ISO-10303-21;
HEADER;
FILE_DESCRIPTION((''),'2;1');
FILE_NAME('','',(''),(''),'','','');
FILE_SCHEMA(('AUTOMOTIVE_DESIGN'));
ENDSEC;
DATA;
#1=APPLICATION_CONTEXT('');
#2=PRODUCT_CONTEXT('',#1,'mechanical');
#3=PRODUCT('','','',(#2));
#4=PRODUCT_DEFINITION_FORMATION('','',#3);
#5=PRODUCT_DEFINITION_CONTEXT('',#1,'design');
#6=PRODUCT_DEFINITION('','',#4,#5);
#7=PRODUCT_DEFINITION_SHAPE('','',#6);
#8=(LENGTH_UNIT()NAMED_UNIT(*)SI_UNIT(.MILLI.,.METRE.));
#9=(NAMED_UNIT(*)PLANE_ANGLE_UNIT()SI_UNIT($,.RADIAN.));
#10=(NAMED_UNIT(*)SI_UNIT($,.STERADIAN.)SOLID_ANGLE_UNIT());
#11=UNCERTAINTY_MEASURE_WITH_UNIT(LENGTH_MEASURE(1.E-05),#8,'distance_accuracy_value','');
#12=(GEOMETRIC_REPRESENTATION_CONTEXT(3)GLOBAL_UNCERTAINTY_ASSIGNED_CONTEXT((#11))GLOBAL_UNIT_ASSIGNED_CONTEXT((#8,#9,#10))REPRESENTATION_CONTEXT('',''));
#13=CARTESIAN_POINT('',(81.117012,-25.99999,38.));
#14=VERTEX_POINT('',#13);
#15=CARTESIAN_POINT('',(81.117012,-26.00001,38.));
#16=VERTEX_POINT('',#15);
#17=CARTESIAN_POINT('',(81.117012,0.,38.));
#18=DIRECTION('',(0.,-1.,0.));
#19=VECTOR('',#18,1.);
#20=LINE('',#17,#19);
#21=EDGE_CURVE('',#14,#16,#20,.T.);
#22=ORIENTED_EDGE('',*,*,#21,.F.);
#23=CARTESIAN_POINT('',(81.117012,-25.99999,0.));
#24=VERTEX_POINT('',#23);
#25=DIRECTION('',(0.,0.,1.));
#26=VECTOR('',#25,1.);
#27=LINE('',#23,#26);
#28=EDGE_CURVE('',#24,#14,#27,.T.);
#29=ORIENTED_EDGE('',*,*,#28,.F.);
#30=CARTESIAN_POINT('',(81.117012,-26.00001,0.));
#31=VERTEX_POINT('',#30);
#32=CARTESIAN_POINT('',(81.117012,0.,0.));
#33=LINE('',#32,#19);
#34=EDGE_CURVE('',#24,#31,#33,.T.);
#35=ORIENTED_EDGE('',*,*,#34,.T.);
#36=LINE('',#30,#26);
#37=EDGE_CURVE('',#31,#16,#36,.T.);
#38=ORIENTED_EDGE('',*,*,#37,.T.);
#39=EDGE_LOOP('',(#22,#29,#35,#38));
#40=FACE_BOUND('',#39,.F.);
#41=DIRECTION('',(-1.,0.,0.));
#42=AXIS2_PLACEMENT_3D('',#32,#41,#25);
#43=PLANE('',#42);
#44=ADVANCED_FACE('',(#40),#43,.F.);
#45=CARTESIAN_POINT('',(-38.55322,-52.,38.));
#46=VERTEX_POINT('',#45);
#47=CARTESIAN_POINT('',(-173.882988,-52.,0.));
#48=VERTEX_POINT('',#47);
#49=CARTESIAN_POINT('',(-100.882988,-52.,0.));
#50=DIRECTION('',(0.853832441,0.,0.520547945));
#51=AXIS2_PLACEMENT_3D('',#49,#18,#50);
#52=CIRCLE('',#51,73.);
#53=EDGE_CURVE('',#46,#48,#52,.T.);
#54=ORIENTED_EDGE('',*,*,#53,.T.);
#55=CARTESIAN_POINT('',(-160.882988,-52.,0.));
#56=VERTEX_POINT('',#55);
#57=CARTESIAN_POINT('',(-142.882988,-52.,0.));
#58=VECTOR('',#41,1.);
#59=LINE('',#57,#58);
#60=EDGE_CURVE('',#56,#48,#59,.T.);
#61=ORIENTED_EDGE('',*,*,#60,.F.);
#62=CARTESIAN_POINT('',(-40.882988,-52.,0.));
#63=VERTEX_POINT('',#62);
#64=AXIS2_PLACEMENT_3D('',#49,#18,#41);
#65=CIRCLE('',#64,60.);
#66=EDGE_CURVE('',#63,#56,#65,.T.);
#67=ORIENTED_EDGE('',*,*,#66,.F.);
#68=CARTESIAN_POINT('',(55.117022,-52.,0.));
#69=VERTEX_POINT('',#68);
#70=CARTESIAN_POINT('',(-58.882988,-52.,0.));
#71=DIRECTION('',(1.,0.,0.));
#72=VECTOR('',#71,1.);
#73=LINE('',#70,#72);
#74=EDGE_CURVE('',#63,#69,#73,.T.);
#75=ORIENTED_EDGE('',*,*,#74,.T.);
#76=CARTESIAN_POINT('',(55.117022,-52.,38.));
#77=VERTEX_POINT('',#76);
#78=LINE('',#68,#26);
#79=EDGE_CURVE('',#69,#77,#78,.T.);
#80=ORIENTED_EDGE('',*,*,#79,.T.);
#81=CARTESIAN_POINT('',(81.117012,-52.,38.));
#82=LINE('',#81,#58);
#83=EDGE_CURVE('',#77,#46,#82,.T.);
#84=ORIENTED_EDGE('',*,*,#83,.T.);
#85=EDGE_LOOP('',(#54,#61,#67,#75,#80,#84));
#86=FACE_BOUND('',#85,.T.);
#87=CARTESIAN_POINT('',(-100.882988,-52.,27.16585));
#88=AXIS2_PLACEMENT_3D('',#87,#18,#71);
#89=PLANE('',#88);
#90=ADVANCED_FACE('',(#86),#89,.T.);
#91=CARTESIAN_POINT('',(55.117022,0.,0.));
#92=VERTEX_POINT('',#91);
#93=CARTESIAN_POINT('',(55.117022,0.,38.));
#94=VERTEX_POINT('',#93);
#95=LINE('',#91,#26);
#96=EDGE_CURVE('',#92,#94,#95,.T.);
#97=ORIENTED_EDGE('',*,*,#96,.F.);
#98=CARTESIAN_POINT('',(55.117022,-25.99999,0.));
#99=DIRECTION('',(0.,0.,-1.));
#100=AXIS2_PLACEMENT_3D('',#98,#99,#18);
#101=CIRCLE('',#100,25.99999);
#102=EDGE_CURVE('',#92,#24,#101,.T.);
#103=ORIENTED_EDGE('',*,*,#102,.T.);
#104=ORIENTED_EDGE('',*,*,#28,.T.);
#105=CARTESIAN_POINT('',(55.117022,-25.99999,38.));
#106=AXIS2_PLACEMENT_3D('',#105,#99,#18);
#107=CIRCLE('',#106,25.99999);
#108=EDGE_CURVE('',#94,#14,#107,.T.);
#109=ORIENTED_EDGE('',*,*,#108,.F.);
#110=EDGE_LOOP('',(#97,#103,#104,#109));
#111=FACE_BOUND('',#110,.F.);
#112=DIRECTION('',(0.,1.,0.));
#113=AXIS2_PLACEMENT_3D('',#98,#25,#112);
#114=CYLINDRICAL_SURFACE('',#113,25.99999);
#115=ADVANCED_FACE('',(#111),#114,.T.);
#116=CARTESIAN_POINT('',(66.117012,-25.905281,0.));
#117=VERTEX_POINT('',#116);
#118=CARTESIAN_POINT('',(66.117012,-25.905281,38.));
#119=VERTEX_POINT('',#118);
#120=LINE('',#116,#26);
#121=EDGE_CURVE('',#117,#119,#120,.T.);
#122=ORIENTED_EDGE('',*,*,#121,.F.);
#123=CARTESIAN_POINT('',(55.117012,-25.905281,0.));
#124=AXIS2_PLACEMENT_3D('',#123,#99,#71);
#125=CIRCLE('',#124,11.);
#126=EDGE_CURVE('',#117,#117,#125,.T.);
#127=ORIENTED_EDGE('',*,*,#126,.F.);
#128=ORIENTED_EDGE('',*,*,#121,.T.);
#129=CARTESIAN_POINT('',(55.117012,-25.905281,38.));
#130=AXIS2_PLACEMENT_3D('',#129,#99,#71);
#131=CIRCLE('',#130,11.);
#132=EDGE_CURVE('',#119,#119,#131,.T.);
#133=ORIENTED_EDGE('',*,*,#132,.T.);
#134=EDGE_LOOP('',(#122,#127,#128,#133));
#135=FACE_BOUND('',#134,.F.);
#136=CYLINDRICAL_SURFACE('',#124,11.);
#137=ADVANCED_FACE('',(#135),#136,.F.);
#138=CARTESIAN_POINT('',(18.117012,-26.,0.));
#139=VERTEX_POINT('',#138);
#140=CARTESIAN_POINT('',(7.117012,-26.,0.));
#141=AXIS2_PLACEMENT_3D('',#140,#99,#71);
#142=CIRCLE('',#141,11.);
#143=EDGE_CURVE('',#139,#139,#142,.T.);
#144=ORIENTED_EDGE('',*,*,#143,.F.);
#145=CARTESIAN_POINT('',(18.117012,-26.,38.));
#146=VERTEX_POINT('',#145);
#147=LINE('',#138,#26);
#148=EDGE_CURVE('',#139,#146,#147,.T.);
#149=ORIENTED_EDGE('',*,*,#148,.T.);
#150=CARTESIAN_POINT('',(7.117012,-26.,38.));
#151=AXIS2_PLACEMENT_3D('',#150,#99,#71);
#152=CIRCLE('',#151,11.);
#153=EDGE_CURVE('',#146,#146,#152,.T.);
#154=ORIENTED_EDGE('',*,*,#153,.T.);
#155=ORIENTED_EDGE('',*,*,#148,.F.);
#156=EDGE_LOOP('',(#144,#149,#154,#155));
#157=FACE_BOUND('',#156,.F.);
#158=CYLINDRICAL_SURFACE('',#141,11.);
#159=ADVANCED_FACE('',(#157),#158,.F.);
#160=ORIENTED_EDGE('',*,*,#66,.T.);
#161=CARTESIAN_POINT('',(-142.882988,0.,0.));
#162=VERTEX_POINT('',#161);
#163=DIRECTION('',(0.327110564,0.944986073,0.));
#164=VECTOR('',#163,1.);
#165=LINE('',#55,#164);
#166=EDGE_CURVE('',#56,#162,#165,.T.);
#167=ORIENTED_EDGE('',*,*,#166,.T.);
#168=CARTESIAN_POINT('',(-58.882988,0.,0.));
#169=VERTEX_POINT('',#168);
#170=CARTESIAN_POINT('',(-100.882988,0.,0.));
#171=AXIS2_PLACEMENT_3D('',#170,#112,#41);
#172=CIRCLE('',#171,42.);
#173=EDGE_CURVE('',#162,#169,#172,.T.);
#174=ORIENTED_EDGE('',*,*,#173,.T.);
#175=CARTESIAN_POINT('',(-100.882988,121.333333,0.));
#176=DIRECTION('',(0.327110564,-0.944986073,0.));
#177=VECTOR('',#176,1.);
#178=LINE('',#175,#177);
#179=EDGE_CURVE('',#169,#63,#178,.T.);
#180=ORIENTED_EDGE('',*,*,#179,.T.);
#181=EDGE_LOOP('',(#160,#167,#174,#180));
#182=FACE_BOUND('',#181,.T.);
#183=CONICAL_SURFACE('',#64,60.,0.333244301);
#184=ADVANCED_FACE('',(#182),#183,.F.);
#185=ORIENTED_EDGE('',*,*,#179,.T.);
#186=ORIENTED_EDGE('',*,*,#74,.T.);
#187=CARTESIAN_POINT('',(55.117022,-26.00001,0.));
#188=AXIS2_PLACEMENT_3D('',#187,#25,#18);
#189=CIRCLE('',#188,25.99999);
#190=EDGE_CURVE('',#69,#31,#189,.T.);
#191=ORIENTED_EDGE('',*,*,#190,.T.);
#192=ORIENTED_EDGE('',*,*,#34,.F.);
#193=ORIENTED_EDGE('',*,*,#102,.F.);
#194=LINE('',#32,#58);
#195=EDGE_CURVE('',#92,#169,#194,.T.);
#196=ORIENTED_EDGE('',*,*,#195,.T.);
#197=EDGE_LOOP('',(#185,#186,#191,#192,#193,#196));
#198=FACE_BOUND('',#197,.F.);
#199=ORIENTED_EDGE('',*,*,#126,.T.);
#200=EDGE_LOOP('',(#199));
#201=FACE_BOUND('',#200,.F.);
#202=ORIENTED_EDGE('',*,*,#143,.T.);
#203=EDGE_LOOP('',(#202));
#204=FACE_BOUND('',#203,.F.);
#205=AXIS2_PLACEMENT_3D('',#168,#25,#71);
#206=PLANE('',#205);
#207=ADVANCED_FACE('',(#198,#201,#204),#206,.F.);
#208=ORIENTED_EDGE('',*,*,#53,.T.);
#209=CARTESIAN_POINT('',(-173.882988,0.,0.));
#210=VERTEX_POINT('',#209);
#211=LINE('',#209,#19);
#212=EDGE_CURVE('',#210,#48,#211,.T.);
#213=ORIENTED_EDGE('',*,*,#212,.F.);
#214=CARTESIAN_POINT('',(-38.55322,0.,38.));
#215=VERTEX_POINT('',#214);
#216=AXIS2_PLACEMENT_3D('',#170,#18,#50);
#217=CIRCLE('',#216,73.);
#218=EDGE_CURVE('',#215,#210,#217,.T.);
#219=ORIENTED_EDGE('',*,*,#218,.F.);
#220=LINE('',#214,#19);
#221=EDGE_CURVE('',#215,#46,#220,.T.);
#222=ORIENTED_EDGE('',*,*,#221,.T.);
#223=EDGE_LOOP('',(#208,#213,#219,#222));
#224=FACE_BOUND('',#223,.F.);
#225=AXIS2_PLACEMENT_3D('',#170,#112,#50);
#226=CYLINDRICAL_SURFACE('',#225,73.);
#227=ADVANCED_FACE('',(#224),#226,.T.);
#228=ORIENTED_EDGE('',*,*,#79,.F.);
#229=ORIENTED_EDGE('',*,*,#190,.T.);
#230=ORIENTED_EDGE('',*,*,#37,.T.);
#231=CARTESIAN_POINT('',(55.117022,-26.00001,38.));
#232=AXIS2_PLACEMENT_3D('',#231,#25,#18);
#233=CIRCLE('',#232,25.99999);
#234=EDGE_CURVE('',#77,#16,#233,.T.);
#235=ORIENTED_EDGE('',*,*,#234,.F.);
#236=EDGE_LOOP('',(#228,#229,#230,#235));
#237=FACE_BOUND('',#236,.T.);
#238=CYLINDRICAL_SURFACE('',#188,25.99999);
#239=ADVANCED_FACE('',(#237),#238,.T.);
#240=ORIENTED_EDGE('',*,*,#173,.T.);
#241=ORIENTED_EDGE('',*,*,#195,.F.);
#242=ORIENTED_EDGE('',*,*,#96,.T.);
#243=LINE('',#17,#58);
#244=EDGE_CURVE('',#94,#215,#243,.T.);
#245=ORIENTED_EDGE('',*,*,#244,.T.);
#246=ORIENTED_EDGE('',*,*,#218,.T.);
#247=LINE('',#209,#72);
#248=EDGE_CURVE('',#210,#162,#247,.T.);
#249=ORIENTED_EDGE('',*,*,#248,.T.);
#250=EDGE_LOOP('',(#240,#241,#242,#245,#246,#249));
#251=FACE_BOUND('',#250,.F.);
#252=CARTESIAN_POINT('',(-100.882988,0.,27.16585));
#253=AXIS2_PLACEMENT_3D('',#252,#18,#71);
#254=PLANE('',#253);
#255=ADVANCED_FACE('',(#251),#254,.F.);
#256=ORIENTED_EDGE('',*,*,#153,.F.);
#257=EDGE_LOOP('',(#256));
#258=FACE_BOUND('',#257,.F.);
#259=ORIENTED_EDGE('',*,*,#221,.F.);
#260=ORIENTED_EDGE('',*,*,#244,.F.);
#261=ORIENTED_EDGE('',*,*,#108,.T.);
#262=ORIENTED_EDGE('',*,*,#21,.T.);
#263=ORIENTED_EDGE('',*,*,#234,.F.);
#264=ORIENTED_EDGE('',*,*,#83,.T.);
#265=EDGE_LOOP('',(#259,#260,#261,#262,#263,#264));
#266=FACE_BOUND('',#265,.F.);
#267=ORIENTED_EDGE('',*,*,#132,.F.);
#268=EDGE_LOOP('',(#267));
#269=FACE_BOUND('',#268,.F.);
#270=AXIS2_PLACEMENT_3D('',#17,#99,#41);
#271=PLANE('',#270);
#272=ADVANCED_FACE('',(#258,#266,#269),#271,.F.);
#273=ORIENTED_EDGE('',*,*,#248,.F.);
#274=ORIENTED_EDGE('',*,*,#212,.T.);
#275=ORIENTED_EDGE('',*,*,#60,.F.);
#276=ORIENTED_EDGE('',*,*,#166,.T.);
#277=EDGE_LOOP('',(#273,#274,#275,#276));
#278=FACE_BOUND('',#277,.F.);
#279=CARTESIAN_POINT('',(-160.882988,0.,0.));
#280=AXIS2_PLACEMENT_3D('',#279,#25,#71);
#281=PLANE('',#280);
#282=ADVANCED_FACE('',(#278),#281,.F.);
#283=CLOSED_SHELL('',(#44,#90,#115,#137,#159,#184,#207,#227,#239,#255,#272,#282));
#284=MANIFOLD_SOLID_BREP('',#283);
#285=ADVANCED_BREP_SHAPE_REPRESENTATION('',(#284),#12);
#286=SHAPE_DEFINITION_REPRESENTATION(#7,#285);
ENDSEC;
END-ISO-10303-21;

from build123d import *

# Parameters (mm, degrees)
F1_DEPTH = 52
F2_DEPTH = 52
F5_R     = 11
F6_DEPTH = 47.1
F7_R     = 25.99999


# Not quite as in the source:
# - a fillet or chamfer is up to 0.001 mm smaller than in the source, because OpenCascade refuses the exact size


with BuildPart() as f1:
    # F0 (on Front) → F1 (new body)
    with BuildSketch(Plane.XZ):
        with BuildLine():
            Line((81.1170118507, 38), (-38.5532199803, 38))
            ThreePointArc((-38.5532199803, 38), (-120.6178167989, 70.2818364741), (-173.8829881493, 0))
            Line((-173.8829881493, 0), (-160.8829881493, 0))
            ThreePointArc((-160.8829881493, 0), (-100.8829881493, 60), (-40.8829881493, 0))
            Line((-40.8829881493, 0), (-27.8829881493, 0))
            Line((-27.8829881493, 0), (81.1170118507, 0))
            Line((81.1170118507, 0), (81.1170118507, 38))
        make_face()
    extrude(amount=F1_DEPTH)

    # F0 (on Front) → F2 (join)
    with BuildSketch(Plane.XZ):
        with BuildLine():
            ThreePointArc((-40.8829881493, 0), (-100.8829881493, 60), (-160.8829881493, 0))
            Line((-160.8829881493, 0), (-142.8829881493, 0))
            ThreePointArc((-142.8829881493, 0), (-100.8829881493, 42), (-58.8829881493, 0))
            Line((-58.8829881493, 0), (-40.8829881493, 0))
        make_face()
    extrude(amount=F2_DEPTH)

    # F3 (on face) → F4 (revolve, cut)
    with BuildSketch(Plane(origin=(0, 0, 0), x_dir=(1, 0, 0), z_dir=(0, 0, -1))):
        Polygon((-160.8829881493, 52), (-142.8829881493, 0), (-142.8829881493, 52), align=None)
    revolve(axis=Axis((-100.8829881493, -31.7908115685, 0), (0, -1, 0)), mode=Mode.SUBTRACT)

    # F5 (on face) → F6 (cut)
    with BuildSketch(Plane(origin=(0, 0, 0), x_dir=(1, 0, 0), z_dir=(0, 0, -1))):
        with Locations((7.1170118507, 26)):
            Circle(F5_R)
        with Locations((55.1170118507, 25.905281347)):
            Circle(F5_R)
    extrude(amount=-F6_DEPTH, mode=Mode.SUBTRACT)

    # F7 (radius 26 in the source; OpenCascade refuses exactly that, so slightly less here)
    f7_edges = [f1.edges().sort_by_distance(p)[0] for p in [
        (81.117012, -52, 19),
        (81.117012, 0, 19),
    ]]
    fillet(f7_edges, radius=F7_R)


solid = f1.part
